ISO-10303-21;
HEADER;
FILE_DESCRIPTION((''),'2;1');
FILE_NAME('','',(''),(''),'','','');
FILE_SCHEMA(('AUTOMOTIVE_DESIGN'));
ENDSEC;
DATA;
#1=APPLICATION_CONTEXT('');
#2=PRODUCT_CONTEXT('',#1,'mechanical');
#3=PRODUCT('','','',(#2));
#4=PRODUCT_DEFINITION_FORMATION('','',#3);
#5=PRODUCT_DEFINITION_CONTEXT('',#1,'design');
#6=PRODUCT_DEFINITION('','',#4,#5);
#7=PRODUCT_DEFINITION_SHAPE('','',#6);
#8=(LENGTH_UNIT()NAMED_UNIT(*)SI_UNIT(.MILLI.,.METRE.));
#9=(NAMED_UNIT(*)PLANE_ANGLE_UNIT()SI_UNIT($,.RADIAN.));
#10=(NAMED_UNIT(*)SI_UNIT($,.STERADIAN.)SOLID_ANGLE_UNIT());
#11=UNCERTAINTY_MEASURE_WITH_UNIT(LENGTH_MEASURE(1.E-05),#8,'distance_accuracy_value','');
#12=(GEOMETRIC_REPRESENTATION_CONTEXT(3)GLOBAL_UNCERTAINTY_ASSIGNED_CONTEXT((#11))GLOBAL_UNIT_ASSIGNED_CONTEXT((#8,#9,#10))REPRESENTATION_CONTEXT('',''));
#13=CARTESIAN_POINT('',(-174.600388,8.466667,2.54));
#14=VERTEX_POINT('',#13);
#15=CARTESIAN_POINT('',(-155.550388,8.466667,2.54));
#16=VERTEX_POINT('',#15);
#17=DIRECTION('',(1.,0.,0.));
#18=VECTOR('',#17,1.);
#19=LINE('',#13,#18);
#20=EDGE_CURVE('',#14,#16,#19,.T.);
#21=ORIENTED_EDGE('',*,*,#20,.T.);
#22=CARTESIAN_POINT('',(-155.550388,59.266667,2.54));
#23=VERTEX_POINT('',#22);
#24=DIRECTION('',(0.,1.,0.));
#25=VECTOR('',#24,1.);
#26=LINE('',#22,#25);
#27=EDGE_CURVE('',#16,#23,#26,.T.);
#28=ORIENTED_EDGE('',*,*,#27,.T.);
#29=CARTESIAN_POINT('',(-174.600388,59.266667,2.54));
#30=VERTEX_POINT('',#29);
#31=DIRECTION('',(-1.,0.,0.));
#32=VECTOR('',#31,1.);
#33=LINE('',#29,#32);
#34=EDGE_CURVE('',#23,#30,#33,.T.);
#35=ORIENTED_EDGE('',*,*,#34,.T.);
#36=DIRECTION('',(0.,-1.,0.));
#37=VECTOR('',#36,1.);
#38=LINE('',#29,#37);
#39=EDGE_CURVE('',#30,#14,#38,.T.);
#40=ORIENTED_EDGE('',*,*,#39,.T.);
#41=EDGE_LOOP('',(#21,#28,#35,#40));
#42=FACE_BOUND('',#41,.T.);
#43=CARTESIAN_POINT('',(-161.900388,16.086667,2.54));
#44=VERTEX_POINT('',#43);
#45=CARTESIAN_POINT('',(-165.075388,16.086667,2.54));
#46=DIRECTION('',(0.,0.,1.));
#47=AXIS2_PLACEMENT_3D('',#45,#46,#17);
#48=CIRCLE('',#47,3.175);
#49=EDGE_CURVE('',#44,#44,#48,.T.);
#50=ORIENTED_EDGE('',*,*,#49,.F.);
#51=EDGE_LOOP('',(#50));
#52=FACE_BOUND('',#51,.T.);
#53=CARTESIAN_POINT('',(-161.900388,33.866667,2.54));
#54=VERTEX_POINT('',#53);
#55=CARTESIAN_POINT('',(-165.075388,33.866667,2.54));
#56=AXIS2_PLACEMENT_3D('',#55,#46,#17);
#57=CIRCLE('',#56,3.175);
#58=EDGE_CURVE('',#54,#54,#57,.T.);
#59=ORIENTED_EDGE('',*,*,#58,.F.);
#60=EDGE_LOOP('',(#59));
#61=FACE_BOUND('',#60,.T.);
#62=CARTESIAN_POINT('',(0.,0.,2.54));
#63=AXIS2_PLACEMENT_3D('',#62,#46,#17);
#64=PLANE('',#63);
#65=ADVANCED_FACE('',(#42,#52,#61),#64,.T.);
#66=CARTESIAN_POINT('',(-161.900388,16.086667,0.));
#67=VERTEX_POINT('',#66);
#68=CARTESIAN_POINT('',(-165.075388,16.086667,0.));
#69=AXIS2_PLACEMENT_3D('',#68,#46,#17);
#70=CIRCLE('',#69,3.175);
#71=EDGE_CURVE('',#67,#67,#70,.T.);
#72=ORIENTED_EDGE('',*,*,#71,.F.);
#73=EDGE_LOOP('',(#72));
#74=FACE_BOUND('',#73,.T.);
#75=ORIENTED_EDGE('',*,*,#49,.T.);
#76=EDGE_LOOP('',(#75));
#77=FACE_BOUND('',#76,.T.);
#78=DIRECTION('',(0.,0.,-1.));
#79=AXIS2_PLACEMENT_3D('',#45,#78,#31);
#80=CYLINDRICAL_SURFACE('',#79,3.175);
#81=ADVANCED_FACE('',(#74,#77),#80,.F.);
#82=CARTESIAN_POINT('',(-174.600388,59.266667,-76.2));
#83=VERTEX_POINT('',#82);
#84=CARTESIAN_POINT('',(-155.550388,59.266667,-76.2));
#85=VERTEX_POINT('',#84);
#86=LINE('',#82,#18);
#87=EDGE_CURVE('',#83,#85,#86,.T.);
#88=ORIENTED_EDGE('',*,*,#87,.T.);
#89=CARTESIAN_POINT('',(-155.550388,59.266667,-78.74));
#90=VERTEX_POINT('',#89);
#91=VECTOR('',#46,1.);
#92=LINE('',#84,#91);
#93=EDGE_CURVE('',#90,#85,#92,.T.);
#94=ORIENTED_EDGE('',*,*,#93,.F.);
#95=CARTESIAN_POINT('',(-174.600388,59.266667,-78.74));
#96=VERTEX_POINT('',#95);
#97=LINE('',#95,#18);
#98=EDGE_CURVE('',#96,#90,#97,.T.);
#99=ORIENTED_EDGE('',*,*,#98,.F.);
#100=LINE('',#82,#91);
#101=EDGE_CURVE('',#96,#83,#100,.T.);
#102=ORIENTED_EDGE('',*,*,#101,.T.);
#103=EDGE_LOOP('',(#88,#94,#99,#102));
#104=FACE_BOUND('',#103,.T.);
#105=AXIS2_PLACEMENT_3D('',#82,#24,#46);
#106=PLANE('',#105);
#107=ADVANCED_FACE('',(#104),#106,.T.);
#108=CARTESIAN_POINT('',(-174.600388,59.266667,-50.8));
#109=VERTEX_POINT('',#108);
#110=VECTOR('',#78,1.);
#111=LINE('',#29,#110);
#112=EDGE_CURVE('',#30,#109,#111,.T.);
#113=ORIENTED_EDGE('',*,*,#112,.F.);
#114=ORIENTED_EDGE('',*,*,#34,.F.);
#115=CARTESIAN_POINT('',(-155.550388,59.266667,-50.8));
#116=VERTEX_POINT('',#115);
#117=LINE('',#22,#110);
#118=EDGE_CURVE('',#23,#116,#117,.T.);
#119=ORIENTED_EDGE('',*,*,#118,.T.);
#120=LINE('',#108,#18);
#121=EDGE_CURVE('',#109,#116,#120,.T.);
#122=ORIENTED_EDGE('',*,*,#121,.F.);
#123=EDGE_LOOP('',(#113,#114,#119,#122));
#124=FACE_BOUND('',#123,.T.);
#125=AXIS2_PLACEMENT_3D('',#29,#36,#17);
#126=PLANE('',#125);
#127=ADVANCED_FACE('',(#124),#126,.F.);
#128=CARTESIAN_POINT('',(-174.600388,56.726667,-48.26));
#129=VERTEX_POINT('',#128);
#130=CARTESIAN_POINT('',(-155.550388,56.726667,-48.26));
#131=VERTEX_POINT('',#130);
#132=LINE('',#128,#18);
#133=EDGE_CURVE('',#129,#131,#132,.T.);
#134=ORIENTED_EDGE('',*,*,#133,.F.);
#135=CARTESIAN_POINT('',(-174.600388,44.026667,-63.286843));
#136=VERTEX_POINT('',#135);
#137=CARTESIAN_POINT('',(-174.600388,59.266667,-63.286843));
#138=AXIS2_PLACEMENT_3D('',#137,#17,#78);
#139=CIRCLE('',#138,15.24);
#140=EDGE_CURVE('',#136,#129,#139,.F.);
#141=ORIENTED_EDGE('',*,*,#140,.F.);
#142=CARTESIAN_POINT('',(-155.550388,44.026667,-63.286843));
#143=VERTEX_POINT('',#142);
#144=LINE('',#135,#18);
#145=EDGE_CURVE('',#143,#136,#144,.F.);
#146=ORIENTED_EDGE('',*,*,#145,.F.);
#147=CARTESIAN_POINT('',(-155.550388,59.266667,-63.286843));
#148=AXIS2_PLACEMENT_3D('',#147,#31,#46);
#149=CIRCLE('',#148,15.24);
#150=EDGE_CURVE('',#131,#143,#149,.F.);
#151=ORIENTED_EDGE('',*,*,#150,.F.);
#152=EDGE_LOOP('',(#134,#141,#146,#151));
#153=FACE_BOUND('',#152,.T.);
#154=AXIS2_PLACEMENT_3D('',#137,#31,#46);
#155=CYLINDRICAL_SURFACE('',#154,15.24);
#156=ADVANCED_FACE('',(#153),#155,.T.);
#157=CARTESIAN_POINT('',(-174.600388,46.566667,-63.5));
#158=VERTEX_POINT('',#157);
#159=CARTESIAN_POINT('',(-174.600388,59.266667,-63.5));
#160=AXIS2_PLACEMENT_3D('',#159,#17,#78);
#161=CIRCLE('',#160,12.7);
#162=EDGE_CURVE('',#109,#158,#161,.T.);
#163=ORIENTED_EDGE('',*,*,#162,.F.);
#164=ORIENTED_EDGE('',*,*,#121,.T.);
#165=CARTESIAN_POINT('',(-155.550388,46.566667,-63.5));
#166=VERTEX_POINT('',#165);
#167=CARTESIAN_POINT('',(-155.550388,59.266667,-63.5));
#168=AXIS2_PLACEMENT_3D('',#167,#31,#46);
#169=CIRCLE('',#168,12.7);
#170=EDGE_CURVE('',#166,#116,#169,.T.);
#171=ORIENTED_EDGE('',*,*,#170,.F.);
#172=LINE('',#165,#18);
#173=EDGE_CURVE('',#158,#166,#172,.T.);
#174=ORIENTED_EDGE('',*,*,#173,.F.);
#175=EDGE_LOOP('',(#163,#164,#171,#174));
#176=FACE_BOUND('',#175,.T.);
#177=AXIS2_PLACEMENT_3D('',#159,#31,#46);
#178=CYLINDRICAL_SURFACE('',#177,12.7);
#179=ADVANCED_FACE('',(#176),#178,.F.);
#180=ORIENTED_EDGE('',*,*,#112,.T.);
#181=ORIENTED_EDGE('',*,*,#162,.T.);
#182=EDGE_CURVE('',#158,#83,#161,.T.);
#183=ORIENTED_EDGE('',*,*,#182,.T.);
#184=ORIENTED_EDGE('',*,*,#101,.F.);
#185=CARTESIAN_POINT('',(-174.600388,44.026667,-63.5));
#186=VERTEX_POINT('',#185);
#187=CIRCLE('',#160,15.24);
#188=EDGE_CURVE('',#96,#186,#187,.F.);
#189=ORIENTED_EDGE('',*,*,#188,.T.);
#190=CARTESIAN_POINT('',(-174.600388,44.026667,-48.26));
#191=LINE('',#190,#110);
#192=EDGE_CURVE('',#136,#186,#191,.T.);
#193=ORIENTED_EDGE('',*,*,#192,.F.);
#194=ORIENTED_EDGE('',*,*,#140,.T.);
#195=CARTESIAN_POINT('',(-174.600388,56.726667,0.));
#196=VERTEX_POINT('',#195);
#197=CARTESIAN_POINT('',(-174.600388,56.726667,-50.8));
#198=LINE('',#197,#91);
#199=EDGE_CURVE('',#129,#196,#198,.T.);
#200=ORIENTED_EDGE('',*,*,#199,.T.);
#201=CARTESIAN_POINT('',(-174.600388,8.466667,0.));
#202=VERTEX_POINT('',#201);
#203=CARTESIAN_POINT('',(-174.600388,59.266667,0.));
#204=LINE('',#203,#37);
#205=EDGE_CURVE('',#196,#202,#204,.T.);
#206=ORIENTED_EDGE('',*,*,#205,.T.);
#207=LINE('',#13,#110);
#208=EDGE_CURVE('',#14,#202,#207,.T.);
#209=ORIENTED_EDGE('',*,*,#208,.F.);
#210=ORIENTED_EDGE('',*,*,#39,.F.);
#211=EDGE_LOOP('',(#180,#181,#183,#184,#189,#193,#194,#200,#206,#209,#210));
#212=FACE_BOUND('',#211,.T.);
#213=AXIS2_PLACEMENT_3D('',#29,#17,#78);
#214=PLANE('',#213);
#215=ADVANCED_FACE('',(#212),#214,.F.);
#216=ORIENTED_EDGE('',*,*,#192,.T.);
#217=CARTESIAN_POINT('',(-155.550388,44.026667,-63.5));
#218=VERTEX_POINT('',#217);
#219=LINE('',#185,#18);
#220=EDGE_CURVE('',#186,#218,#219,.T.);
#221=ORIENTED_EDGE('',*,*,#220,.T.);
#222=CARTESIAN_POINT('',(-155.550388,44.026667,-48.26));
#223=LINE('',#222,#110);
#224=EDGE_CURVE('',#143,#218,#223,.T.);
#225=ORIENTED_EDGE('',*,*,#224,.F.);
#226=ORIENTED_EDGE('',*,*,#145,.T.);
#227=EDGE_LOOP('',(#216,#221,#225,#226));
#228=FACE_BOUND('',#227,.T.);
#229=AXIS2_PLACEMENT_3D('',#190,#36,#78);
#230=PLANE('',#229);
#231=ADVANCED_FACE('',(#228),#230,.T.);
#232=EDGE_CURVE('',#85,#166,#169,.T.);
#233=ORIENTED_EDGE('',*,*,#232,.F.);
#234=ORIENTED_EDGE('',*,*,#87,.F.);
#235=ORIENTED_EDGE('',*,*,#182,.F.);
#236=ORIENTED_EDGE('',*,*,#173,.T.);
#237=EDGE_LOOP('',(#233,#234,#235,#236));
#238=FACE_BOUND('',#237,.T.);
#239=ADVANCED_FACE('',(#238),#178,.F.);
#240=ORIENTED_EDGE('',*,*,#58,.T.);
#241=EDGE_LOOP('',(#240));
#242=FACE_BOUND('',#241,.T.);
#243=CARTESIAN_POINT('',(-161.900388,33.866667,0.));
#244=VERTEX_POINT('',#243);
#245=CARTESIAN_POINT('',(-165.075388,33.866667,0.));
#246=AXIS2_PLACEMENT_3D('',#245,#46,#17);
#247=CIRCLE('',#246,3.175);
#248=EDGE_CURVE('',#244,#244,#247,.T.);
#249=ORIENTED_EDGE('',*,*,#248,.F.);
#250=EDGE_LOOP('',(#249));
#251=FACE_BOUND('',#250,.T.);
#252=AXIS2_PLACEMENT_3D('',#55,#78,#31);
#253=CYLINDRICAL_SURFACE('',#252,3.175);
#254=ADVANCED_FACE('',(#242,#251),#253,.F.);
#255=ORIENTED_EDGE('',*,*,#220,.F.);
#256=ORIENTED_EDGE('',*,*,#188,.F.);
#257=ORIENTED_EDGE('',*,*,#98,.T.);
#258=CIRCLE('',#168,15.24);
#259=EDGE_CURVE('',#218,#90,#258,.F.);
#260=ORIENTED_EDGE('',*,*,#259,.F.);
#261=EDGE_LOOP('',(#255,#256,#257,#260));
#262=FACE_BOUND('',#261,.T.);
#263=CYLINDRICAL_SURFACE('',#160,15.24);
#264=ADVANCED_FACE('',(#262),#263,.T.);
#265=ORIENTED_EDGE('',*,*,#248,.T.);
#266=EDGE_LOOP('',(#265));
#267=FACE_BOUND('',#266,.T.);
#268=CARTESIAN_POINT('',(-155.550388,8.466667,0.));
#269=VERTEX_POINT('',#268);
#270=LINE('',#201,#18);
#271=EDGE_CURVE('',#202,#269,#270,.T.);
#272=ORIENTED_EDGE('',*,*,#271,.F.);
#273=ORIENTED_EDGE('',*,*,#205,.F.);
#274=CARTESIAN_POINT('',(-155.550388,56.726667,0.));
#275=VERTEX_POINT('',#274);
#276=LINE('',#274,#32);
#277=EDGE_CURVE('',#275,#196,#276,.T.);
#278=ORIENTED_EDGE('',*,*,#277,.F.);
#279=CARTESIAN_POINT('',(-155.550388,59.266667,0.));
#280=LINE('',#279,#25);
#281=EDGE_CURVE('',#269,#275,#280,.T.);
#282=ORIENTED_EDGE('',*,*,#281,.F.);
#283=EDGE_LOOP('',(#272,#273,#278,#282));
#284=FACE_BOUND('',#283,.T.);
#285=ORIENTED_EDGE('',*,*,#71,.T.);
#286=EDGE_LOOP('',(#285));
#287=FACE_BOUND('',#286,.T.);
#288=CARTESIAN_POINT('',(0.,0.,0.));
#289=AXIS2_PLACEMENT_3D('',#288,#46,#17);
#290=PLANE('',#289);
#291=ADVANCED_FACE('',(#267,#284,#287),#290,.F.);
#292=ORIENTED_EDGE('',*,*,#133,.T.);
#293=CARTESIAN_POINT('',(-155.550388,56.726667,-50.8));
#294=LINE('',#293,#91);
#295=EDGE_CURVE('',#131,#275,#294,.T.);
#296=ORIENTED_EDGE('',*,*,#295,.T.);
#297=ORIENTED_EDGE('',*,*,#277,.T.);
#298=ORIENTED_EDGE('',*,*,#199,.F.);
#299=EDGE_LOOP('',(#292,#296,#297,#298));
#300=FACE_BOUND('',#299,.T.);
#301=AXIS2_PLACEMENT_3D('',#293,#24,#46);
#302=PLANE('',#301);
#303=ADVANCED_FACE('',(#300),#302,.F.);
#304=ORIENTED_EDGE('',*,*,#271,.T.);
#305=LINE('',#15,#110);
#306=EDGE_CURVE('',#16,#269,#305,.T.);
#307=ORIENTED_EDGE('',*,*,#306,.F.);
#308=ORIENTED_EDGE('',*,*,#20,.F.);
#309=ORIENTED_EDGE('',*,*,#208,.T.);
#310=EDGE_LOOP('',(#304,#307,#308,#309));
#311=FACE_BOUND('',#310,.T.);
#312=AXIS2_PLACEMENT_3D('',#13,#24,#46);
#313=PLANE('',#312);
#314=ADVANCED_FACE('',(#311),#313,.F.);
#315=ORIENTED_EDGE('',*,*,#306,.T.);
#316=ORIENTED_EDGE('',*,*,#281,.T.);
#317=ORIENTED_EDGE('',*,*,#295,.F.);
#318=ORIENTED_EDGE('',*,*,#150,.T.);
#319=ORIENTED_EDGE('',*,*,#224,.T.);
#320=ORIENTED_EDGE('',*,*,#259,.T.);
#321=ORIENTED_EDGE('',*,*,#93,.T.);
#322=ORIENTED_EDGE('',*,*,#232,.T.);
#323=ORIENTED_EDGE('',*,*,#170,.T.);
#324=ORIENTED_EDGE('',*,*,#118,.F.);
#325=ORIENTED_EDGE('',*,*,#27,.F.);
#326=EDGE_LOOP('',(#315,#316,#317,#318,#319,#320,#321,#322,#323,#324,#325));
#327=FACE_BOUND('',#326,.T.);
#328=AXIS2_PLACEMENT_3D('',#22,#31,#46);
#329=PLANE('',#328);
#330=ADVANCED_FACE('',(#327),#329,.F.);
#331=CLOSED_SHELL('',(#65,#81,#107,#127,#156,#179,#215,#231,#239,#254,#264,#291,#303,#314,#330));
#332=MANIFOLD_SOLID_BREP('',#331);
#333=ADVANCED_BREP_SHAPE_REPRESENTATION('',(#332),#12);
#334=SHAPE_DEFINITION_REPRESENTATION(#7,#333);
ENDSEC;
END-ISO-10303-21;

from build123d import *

# Parameters (mm, degrees)
SKETCH1_W           = 19.05
SKETCH1_H           = 50.8
SKETCH1_R           = 3.175
BOSS_EXTRUDE1_DEPTH = 2.54
SKETCH2_W           = 19.05
SKETCH2_H           = 2.54
BOSS_EXTRUDE2_DEPTH = 50.8
BOSS_EXTRUDE5_DEPTH = 19.05
FILLET6_R           = 12.7
FILLET7_R           = 15.24
FILLET11_R          = 12.7
FILLET12_R          = 15.24


# Some blends are built 0.0001 mm under size
with BuildPart() as part:
    # Sketch1 → Boss-Extrude1 (new body)
    with BuildSketch(Plane.XY):
        with Locations((-165.075387597, 33.866666667)):
            Rectangle(SKETCH1_W, SKETCH1_H)
        with Locations((-165.075387597, 16.086666667)):
            Circle(SKETCH1_R, mode=Mode.SUBTRACT)
        with Locations((-165.075387597, 33.866666667)):
            Circle(SKETCH1_R, mode=Mode.SUBTRACT)
    extrude(amount=BOSS_EXTRUDE1_DEPTH)

    # Sketch2 → Boss-Extrude2 (add)
    with BuildSketch(Plane(origin=(0, 0, 0), x_dir=(-1, 0, 0), z_dir=(0, 0, -1))):
        with Locations((165.075387597, 57.996666667)):
            Rectangle(SKETCH2_W, SKETCH2_H)
    extrude(amount=BOSS_EXTRUDE2_DEPTH)

    # Sketch4 → Boss-Extrude5 (add)
    with BuildSketch(Plane(origin=(-155.550387597, 0, 0), x_dir=(0, 0, -1), z_dir=(1, 0, 0))):
        Polygon((48.26, 56.726666667), (48.26, 44.026666667), (78.74, 44.026666667), (78.74, 59.266666667), (76.2, 59.266666667), (76.2, 46.566666667), (50.8, 46.566666667), (50.8, 56.726666667), align=None)
    extrude(amount=-BOSS_EXTRUDE5_DEPTH)

    # Fillet6
    fillet6_edges = [part.edges().sort_by_distance(p)[0] for p in [
        (-165.075387597, 46.566666667, -50.8),
    ]]
    fillet(fillet6_edges, radius=FILLET6_R - 0.0001)  # a hair under: the kernel refuses the full size

    # Fillet7
    # the kernel refuses this fillet: 15.24 mm, written as the material it takes off along each edge
    with BuildSketch(Plane(origin=(-117.983280974, 44.026666667, -48.26), x_dir=(0, 0, -1), z_dir=(-1, 0, 0))) as fillet7_piece_1:
        with BuildLine():
            CenterArc((15.026842649, -15.24), FILLET7_R, 90, 80.405931773)
            Line((0, -12.7), (-0.300536853, -12.6492))
            ThreePointArc((-0.300536853, -12.6492), (-0.3048, -6.35), (-0.3048, 0))
            Line((-0.3048, 0), (0, 0.3048))
            Line((0, 0.3048), (15.026842649, 0.3048))
            Line((15.026842649, 0.3048), (15.026842649, 0))
        make_face()
    extrude(amount=94.184213245, mode=Mode.SUBTRACT)

    # Fillet11
    fillet11_edges = [part.edges().sort_by_distance(p)[0] for p in [
        (-165.075387597, 46.566666667, -76.2),
    ]]
    fillet(fillet11_edges, radius=FILLET11_R - 0.0001)  # a hair under: the kernel refuses the full size

    # Fillet12
    fillet12_edges = [part.edges().sort_by_distance(p)[0] for p in [
        (-165.075387597, 44.026666667, -78.74),
    ]]
    fillet(fillet12_edges, radius=FILLET12_R - 0.0001)  # a hair under: the kernel refuses the full size


solid = part.part
